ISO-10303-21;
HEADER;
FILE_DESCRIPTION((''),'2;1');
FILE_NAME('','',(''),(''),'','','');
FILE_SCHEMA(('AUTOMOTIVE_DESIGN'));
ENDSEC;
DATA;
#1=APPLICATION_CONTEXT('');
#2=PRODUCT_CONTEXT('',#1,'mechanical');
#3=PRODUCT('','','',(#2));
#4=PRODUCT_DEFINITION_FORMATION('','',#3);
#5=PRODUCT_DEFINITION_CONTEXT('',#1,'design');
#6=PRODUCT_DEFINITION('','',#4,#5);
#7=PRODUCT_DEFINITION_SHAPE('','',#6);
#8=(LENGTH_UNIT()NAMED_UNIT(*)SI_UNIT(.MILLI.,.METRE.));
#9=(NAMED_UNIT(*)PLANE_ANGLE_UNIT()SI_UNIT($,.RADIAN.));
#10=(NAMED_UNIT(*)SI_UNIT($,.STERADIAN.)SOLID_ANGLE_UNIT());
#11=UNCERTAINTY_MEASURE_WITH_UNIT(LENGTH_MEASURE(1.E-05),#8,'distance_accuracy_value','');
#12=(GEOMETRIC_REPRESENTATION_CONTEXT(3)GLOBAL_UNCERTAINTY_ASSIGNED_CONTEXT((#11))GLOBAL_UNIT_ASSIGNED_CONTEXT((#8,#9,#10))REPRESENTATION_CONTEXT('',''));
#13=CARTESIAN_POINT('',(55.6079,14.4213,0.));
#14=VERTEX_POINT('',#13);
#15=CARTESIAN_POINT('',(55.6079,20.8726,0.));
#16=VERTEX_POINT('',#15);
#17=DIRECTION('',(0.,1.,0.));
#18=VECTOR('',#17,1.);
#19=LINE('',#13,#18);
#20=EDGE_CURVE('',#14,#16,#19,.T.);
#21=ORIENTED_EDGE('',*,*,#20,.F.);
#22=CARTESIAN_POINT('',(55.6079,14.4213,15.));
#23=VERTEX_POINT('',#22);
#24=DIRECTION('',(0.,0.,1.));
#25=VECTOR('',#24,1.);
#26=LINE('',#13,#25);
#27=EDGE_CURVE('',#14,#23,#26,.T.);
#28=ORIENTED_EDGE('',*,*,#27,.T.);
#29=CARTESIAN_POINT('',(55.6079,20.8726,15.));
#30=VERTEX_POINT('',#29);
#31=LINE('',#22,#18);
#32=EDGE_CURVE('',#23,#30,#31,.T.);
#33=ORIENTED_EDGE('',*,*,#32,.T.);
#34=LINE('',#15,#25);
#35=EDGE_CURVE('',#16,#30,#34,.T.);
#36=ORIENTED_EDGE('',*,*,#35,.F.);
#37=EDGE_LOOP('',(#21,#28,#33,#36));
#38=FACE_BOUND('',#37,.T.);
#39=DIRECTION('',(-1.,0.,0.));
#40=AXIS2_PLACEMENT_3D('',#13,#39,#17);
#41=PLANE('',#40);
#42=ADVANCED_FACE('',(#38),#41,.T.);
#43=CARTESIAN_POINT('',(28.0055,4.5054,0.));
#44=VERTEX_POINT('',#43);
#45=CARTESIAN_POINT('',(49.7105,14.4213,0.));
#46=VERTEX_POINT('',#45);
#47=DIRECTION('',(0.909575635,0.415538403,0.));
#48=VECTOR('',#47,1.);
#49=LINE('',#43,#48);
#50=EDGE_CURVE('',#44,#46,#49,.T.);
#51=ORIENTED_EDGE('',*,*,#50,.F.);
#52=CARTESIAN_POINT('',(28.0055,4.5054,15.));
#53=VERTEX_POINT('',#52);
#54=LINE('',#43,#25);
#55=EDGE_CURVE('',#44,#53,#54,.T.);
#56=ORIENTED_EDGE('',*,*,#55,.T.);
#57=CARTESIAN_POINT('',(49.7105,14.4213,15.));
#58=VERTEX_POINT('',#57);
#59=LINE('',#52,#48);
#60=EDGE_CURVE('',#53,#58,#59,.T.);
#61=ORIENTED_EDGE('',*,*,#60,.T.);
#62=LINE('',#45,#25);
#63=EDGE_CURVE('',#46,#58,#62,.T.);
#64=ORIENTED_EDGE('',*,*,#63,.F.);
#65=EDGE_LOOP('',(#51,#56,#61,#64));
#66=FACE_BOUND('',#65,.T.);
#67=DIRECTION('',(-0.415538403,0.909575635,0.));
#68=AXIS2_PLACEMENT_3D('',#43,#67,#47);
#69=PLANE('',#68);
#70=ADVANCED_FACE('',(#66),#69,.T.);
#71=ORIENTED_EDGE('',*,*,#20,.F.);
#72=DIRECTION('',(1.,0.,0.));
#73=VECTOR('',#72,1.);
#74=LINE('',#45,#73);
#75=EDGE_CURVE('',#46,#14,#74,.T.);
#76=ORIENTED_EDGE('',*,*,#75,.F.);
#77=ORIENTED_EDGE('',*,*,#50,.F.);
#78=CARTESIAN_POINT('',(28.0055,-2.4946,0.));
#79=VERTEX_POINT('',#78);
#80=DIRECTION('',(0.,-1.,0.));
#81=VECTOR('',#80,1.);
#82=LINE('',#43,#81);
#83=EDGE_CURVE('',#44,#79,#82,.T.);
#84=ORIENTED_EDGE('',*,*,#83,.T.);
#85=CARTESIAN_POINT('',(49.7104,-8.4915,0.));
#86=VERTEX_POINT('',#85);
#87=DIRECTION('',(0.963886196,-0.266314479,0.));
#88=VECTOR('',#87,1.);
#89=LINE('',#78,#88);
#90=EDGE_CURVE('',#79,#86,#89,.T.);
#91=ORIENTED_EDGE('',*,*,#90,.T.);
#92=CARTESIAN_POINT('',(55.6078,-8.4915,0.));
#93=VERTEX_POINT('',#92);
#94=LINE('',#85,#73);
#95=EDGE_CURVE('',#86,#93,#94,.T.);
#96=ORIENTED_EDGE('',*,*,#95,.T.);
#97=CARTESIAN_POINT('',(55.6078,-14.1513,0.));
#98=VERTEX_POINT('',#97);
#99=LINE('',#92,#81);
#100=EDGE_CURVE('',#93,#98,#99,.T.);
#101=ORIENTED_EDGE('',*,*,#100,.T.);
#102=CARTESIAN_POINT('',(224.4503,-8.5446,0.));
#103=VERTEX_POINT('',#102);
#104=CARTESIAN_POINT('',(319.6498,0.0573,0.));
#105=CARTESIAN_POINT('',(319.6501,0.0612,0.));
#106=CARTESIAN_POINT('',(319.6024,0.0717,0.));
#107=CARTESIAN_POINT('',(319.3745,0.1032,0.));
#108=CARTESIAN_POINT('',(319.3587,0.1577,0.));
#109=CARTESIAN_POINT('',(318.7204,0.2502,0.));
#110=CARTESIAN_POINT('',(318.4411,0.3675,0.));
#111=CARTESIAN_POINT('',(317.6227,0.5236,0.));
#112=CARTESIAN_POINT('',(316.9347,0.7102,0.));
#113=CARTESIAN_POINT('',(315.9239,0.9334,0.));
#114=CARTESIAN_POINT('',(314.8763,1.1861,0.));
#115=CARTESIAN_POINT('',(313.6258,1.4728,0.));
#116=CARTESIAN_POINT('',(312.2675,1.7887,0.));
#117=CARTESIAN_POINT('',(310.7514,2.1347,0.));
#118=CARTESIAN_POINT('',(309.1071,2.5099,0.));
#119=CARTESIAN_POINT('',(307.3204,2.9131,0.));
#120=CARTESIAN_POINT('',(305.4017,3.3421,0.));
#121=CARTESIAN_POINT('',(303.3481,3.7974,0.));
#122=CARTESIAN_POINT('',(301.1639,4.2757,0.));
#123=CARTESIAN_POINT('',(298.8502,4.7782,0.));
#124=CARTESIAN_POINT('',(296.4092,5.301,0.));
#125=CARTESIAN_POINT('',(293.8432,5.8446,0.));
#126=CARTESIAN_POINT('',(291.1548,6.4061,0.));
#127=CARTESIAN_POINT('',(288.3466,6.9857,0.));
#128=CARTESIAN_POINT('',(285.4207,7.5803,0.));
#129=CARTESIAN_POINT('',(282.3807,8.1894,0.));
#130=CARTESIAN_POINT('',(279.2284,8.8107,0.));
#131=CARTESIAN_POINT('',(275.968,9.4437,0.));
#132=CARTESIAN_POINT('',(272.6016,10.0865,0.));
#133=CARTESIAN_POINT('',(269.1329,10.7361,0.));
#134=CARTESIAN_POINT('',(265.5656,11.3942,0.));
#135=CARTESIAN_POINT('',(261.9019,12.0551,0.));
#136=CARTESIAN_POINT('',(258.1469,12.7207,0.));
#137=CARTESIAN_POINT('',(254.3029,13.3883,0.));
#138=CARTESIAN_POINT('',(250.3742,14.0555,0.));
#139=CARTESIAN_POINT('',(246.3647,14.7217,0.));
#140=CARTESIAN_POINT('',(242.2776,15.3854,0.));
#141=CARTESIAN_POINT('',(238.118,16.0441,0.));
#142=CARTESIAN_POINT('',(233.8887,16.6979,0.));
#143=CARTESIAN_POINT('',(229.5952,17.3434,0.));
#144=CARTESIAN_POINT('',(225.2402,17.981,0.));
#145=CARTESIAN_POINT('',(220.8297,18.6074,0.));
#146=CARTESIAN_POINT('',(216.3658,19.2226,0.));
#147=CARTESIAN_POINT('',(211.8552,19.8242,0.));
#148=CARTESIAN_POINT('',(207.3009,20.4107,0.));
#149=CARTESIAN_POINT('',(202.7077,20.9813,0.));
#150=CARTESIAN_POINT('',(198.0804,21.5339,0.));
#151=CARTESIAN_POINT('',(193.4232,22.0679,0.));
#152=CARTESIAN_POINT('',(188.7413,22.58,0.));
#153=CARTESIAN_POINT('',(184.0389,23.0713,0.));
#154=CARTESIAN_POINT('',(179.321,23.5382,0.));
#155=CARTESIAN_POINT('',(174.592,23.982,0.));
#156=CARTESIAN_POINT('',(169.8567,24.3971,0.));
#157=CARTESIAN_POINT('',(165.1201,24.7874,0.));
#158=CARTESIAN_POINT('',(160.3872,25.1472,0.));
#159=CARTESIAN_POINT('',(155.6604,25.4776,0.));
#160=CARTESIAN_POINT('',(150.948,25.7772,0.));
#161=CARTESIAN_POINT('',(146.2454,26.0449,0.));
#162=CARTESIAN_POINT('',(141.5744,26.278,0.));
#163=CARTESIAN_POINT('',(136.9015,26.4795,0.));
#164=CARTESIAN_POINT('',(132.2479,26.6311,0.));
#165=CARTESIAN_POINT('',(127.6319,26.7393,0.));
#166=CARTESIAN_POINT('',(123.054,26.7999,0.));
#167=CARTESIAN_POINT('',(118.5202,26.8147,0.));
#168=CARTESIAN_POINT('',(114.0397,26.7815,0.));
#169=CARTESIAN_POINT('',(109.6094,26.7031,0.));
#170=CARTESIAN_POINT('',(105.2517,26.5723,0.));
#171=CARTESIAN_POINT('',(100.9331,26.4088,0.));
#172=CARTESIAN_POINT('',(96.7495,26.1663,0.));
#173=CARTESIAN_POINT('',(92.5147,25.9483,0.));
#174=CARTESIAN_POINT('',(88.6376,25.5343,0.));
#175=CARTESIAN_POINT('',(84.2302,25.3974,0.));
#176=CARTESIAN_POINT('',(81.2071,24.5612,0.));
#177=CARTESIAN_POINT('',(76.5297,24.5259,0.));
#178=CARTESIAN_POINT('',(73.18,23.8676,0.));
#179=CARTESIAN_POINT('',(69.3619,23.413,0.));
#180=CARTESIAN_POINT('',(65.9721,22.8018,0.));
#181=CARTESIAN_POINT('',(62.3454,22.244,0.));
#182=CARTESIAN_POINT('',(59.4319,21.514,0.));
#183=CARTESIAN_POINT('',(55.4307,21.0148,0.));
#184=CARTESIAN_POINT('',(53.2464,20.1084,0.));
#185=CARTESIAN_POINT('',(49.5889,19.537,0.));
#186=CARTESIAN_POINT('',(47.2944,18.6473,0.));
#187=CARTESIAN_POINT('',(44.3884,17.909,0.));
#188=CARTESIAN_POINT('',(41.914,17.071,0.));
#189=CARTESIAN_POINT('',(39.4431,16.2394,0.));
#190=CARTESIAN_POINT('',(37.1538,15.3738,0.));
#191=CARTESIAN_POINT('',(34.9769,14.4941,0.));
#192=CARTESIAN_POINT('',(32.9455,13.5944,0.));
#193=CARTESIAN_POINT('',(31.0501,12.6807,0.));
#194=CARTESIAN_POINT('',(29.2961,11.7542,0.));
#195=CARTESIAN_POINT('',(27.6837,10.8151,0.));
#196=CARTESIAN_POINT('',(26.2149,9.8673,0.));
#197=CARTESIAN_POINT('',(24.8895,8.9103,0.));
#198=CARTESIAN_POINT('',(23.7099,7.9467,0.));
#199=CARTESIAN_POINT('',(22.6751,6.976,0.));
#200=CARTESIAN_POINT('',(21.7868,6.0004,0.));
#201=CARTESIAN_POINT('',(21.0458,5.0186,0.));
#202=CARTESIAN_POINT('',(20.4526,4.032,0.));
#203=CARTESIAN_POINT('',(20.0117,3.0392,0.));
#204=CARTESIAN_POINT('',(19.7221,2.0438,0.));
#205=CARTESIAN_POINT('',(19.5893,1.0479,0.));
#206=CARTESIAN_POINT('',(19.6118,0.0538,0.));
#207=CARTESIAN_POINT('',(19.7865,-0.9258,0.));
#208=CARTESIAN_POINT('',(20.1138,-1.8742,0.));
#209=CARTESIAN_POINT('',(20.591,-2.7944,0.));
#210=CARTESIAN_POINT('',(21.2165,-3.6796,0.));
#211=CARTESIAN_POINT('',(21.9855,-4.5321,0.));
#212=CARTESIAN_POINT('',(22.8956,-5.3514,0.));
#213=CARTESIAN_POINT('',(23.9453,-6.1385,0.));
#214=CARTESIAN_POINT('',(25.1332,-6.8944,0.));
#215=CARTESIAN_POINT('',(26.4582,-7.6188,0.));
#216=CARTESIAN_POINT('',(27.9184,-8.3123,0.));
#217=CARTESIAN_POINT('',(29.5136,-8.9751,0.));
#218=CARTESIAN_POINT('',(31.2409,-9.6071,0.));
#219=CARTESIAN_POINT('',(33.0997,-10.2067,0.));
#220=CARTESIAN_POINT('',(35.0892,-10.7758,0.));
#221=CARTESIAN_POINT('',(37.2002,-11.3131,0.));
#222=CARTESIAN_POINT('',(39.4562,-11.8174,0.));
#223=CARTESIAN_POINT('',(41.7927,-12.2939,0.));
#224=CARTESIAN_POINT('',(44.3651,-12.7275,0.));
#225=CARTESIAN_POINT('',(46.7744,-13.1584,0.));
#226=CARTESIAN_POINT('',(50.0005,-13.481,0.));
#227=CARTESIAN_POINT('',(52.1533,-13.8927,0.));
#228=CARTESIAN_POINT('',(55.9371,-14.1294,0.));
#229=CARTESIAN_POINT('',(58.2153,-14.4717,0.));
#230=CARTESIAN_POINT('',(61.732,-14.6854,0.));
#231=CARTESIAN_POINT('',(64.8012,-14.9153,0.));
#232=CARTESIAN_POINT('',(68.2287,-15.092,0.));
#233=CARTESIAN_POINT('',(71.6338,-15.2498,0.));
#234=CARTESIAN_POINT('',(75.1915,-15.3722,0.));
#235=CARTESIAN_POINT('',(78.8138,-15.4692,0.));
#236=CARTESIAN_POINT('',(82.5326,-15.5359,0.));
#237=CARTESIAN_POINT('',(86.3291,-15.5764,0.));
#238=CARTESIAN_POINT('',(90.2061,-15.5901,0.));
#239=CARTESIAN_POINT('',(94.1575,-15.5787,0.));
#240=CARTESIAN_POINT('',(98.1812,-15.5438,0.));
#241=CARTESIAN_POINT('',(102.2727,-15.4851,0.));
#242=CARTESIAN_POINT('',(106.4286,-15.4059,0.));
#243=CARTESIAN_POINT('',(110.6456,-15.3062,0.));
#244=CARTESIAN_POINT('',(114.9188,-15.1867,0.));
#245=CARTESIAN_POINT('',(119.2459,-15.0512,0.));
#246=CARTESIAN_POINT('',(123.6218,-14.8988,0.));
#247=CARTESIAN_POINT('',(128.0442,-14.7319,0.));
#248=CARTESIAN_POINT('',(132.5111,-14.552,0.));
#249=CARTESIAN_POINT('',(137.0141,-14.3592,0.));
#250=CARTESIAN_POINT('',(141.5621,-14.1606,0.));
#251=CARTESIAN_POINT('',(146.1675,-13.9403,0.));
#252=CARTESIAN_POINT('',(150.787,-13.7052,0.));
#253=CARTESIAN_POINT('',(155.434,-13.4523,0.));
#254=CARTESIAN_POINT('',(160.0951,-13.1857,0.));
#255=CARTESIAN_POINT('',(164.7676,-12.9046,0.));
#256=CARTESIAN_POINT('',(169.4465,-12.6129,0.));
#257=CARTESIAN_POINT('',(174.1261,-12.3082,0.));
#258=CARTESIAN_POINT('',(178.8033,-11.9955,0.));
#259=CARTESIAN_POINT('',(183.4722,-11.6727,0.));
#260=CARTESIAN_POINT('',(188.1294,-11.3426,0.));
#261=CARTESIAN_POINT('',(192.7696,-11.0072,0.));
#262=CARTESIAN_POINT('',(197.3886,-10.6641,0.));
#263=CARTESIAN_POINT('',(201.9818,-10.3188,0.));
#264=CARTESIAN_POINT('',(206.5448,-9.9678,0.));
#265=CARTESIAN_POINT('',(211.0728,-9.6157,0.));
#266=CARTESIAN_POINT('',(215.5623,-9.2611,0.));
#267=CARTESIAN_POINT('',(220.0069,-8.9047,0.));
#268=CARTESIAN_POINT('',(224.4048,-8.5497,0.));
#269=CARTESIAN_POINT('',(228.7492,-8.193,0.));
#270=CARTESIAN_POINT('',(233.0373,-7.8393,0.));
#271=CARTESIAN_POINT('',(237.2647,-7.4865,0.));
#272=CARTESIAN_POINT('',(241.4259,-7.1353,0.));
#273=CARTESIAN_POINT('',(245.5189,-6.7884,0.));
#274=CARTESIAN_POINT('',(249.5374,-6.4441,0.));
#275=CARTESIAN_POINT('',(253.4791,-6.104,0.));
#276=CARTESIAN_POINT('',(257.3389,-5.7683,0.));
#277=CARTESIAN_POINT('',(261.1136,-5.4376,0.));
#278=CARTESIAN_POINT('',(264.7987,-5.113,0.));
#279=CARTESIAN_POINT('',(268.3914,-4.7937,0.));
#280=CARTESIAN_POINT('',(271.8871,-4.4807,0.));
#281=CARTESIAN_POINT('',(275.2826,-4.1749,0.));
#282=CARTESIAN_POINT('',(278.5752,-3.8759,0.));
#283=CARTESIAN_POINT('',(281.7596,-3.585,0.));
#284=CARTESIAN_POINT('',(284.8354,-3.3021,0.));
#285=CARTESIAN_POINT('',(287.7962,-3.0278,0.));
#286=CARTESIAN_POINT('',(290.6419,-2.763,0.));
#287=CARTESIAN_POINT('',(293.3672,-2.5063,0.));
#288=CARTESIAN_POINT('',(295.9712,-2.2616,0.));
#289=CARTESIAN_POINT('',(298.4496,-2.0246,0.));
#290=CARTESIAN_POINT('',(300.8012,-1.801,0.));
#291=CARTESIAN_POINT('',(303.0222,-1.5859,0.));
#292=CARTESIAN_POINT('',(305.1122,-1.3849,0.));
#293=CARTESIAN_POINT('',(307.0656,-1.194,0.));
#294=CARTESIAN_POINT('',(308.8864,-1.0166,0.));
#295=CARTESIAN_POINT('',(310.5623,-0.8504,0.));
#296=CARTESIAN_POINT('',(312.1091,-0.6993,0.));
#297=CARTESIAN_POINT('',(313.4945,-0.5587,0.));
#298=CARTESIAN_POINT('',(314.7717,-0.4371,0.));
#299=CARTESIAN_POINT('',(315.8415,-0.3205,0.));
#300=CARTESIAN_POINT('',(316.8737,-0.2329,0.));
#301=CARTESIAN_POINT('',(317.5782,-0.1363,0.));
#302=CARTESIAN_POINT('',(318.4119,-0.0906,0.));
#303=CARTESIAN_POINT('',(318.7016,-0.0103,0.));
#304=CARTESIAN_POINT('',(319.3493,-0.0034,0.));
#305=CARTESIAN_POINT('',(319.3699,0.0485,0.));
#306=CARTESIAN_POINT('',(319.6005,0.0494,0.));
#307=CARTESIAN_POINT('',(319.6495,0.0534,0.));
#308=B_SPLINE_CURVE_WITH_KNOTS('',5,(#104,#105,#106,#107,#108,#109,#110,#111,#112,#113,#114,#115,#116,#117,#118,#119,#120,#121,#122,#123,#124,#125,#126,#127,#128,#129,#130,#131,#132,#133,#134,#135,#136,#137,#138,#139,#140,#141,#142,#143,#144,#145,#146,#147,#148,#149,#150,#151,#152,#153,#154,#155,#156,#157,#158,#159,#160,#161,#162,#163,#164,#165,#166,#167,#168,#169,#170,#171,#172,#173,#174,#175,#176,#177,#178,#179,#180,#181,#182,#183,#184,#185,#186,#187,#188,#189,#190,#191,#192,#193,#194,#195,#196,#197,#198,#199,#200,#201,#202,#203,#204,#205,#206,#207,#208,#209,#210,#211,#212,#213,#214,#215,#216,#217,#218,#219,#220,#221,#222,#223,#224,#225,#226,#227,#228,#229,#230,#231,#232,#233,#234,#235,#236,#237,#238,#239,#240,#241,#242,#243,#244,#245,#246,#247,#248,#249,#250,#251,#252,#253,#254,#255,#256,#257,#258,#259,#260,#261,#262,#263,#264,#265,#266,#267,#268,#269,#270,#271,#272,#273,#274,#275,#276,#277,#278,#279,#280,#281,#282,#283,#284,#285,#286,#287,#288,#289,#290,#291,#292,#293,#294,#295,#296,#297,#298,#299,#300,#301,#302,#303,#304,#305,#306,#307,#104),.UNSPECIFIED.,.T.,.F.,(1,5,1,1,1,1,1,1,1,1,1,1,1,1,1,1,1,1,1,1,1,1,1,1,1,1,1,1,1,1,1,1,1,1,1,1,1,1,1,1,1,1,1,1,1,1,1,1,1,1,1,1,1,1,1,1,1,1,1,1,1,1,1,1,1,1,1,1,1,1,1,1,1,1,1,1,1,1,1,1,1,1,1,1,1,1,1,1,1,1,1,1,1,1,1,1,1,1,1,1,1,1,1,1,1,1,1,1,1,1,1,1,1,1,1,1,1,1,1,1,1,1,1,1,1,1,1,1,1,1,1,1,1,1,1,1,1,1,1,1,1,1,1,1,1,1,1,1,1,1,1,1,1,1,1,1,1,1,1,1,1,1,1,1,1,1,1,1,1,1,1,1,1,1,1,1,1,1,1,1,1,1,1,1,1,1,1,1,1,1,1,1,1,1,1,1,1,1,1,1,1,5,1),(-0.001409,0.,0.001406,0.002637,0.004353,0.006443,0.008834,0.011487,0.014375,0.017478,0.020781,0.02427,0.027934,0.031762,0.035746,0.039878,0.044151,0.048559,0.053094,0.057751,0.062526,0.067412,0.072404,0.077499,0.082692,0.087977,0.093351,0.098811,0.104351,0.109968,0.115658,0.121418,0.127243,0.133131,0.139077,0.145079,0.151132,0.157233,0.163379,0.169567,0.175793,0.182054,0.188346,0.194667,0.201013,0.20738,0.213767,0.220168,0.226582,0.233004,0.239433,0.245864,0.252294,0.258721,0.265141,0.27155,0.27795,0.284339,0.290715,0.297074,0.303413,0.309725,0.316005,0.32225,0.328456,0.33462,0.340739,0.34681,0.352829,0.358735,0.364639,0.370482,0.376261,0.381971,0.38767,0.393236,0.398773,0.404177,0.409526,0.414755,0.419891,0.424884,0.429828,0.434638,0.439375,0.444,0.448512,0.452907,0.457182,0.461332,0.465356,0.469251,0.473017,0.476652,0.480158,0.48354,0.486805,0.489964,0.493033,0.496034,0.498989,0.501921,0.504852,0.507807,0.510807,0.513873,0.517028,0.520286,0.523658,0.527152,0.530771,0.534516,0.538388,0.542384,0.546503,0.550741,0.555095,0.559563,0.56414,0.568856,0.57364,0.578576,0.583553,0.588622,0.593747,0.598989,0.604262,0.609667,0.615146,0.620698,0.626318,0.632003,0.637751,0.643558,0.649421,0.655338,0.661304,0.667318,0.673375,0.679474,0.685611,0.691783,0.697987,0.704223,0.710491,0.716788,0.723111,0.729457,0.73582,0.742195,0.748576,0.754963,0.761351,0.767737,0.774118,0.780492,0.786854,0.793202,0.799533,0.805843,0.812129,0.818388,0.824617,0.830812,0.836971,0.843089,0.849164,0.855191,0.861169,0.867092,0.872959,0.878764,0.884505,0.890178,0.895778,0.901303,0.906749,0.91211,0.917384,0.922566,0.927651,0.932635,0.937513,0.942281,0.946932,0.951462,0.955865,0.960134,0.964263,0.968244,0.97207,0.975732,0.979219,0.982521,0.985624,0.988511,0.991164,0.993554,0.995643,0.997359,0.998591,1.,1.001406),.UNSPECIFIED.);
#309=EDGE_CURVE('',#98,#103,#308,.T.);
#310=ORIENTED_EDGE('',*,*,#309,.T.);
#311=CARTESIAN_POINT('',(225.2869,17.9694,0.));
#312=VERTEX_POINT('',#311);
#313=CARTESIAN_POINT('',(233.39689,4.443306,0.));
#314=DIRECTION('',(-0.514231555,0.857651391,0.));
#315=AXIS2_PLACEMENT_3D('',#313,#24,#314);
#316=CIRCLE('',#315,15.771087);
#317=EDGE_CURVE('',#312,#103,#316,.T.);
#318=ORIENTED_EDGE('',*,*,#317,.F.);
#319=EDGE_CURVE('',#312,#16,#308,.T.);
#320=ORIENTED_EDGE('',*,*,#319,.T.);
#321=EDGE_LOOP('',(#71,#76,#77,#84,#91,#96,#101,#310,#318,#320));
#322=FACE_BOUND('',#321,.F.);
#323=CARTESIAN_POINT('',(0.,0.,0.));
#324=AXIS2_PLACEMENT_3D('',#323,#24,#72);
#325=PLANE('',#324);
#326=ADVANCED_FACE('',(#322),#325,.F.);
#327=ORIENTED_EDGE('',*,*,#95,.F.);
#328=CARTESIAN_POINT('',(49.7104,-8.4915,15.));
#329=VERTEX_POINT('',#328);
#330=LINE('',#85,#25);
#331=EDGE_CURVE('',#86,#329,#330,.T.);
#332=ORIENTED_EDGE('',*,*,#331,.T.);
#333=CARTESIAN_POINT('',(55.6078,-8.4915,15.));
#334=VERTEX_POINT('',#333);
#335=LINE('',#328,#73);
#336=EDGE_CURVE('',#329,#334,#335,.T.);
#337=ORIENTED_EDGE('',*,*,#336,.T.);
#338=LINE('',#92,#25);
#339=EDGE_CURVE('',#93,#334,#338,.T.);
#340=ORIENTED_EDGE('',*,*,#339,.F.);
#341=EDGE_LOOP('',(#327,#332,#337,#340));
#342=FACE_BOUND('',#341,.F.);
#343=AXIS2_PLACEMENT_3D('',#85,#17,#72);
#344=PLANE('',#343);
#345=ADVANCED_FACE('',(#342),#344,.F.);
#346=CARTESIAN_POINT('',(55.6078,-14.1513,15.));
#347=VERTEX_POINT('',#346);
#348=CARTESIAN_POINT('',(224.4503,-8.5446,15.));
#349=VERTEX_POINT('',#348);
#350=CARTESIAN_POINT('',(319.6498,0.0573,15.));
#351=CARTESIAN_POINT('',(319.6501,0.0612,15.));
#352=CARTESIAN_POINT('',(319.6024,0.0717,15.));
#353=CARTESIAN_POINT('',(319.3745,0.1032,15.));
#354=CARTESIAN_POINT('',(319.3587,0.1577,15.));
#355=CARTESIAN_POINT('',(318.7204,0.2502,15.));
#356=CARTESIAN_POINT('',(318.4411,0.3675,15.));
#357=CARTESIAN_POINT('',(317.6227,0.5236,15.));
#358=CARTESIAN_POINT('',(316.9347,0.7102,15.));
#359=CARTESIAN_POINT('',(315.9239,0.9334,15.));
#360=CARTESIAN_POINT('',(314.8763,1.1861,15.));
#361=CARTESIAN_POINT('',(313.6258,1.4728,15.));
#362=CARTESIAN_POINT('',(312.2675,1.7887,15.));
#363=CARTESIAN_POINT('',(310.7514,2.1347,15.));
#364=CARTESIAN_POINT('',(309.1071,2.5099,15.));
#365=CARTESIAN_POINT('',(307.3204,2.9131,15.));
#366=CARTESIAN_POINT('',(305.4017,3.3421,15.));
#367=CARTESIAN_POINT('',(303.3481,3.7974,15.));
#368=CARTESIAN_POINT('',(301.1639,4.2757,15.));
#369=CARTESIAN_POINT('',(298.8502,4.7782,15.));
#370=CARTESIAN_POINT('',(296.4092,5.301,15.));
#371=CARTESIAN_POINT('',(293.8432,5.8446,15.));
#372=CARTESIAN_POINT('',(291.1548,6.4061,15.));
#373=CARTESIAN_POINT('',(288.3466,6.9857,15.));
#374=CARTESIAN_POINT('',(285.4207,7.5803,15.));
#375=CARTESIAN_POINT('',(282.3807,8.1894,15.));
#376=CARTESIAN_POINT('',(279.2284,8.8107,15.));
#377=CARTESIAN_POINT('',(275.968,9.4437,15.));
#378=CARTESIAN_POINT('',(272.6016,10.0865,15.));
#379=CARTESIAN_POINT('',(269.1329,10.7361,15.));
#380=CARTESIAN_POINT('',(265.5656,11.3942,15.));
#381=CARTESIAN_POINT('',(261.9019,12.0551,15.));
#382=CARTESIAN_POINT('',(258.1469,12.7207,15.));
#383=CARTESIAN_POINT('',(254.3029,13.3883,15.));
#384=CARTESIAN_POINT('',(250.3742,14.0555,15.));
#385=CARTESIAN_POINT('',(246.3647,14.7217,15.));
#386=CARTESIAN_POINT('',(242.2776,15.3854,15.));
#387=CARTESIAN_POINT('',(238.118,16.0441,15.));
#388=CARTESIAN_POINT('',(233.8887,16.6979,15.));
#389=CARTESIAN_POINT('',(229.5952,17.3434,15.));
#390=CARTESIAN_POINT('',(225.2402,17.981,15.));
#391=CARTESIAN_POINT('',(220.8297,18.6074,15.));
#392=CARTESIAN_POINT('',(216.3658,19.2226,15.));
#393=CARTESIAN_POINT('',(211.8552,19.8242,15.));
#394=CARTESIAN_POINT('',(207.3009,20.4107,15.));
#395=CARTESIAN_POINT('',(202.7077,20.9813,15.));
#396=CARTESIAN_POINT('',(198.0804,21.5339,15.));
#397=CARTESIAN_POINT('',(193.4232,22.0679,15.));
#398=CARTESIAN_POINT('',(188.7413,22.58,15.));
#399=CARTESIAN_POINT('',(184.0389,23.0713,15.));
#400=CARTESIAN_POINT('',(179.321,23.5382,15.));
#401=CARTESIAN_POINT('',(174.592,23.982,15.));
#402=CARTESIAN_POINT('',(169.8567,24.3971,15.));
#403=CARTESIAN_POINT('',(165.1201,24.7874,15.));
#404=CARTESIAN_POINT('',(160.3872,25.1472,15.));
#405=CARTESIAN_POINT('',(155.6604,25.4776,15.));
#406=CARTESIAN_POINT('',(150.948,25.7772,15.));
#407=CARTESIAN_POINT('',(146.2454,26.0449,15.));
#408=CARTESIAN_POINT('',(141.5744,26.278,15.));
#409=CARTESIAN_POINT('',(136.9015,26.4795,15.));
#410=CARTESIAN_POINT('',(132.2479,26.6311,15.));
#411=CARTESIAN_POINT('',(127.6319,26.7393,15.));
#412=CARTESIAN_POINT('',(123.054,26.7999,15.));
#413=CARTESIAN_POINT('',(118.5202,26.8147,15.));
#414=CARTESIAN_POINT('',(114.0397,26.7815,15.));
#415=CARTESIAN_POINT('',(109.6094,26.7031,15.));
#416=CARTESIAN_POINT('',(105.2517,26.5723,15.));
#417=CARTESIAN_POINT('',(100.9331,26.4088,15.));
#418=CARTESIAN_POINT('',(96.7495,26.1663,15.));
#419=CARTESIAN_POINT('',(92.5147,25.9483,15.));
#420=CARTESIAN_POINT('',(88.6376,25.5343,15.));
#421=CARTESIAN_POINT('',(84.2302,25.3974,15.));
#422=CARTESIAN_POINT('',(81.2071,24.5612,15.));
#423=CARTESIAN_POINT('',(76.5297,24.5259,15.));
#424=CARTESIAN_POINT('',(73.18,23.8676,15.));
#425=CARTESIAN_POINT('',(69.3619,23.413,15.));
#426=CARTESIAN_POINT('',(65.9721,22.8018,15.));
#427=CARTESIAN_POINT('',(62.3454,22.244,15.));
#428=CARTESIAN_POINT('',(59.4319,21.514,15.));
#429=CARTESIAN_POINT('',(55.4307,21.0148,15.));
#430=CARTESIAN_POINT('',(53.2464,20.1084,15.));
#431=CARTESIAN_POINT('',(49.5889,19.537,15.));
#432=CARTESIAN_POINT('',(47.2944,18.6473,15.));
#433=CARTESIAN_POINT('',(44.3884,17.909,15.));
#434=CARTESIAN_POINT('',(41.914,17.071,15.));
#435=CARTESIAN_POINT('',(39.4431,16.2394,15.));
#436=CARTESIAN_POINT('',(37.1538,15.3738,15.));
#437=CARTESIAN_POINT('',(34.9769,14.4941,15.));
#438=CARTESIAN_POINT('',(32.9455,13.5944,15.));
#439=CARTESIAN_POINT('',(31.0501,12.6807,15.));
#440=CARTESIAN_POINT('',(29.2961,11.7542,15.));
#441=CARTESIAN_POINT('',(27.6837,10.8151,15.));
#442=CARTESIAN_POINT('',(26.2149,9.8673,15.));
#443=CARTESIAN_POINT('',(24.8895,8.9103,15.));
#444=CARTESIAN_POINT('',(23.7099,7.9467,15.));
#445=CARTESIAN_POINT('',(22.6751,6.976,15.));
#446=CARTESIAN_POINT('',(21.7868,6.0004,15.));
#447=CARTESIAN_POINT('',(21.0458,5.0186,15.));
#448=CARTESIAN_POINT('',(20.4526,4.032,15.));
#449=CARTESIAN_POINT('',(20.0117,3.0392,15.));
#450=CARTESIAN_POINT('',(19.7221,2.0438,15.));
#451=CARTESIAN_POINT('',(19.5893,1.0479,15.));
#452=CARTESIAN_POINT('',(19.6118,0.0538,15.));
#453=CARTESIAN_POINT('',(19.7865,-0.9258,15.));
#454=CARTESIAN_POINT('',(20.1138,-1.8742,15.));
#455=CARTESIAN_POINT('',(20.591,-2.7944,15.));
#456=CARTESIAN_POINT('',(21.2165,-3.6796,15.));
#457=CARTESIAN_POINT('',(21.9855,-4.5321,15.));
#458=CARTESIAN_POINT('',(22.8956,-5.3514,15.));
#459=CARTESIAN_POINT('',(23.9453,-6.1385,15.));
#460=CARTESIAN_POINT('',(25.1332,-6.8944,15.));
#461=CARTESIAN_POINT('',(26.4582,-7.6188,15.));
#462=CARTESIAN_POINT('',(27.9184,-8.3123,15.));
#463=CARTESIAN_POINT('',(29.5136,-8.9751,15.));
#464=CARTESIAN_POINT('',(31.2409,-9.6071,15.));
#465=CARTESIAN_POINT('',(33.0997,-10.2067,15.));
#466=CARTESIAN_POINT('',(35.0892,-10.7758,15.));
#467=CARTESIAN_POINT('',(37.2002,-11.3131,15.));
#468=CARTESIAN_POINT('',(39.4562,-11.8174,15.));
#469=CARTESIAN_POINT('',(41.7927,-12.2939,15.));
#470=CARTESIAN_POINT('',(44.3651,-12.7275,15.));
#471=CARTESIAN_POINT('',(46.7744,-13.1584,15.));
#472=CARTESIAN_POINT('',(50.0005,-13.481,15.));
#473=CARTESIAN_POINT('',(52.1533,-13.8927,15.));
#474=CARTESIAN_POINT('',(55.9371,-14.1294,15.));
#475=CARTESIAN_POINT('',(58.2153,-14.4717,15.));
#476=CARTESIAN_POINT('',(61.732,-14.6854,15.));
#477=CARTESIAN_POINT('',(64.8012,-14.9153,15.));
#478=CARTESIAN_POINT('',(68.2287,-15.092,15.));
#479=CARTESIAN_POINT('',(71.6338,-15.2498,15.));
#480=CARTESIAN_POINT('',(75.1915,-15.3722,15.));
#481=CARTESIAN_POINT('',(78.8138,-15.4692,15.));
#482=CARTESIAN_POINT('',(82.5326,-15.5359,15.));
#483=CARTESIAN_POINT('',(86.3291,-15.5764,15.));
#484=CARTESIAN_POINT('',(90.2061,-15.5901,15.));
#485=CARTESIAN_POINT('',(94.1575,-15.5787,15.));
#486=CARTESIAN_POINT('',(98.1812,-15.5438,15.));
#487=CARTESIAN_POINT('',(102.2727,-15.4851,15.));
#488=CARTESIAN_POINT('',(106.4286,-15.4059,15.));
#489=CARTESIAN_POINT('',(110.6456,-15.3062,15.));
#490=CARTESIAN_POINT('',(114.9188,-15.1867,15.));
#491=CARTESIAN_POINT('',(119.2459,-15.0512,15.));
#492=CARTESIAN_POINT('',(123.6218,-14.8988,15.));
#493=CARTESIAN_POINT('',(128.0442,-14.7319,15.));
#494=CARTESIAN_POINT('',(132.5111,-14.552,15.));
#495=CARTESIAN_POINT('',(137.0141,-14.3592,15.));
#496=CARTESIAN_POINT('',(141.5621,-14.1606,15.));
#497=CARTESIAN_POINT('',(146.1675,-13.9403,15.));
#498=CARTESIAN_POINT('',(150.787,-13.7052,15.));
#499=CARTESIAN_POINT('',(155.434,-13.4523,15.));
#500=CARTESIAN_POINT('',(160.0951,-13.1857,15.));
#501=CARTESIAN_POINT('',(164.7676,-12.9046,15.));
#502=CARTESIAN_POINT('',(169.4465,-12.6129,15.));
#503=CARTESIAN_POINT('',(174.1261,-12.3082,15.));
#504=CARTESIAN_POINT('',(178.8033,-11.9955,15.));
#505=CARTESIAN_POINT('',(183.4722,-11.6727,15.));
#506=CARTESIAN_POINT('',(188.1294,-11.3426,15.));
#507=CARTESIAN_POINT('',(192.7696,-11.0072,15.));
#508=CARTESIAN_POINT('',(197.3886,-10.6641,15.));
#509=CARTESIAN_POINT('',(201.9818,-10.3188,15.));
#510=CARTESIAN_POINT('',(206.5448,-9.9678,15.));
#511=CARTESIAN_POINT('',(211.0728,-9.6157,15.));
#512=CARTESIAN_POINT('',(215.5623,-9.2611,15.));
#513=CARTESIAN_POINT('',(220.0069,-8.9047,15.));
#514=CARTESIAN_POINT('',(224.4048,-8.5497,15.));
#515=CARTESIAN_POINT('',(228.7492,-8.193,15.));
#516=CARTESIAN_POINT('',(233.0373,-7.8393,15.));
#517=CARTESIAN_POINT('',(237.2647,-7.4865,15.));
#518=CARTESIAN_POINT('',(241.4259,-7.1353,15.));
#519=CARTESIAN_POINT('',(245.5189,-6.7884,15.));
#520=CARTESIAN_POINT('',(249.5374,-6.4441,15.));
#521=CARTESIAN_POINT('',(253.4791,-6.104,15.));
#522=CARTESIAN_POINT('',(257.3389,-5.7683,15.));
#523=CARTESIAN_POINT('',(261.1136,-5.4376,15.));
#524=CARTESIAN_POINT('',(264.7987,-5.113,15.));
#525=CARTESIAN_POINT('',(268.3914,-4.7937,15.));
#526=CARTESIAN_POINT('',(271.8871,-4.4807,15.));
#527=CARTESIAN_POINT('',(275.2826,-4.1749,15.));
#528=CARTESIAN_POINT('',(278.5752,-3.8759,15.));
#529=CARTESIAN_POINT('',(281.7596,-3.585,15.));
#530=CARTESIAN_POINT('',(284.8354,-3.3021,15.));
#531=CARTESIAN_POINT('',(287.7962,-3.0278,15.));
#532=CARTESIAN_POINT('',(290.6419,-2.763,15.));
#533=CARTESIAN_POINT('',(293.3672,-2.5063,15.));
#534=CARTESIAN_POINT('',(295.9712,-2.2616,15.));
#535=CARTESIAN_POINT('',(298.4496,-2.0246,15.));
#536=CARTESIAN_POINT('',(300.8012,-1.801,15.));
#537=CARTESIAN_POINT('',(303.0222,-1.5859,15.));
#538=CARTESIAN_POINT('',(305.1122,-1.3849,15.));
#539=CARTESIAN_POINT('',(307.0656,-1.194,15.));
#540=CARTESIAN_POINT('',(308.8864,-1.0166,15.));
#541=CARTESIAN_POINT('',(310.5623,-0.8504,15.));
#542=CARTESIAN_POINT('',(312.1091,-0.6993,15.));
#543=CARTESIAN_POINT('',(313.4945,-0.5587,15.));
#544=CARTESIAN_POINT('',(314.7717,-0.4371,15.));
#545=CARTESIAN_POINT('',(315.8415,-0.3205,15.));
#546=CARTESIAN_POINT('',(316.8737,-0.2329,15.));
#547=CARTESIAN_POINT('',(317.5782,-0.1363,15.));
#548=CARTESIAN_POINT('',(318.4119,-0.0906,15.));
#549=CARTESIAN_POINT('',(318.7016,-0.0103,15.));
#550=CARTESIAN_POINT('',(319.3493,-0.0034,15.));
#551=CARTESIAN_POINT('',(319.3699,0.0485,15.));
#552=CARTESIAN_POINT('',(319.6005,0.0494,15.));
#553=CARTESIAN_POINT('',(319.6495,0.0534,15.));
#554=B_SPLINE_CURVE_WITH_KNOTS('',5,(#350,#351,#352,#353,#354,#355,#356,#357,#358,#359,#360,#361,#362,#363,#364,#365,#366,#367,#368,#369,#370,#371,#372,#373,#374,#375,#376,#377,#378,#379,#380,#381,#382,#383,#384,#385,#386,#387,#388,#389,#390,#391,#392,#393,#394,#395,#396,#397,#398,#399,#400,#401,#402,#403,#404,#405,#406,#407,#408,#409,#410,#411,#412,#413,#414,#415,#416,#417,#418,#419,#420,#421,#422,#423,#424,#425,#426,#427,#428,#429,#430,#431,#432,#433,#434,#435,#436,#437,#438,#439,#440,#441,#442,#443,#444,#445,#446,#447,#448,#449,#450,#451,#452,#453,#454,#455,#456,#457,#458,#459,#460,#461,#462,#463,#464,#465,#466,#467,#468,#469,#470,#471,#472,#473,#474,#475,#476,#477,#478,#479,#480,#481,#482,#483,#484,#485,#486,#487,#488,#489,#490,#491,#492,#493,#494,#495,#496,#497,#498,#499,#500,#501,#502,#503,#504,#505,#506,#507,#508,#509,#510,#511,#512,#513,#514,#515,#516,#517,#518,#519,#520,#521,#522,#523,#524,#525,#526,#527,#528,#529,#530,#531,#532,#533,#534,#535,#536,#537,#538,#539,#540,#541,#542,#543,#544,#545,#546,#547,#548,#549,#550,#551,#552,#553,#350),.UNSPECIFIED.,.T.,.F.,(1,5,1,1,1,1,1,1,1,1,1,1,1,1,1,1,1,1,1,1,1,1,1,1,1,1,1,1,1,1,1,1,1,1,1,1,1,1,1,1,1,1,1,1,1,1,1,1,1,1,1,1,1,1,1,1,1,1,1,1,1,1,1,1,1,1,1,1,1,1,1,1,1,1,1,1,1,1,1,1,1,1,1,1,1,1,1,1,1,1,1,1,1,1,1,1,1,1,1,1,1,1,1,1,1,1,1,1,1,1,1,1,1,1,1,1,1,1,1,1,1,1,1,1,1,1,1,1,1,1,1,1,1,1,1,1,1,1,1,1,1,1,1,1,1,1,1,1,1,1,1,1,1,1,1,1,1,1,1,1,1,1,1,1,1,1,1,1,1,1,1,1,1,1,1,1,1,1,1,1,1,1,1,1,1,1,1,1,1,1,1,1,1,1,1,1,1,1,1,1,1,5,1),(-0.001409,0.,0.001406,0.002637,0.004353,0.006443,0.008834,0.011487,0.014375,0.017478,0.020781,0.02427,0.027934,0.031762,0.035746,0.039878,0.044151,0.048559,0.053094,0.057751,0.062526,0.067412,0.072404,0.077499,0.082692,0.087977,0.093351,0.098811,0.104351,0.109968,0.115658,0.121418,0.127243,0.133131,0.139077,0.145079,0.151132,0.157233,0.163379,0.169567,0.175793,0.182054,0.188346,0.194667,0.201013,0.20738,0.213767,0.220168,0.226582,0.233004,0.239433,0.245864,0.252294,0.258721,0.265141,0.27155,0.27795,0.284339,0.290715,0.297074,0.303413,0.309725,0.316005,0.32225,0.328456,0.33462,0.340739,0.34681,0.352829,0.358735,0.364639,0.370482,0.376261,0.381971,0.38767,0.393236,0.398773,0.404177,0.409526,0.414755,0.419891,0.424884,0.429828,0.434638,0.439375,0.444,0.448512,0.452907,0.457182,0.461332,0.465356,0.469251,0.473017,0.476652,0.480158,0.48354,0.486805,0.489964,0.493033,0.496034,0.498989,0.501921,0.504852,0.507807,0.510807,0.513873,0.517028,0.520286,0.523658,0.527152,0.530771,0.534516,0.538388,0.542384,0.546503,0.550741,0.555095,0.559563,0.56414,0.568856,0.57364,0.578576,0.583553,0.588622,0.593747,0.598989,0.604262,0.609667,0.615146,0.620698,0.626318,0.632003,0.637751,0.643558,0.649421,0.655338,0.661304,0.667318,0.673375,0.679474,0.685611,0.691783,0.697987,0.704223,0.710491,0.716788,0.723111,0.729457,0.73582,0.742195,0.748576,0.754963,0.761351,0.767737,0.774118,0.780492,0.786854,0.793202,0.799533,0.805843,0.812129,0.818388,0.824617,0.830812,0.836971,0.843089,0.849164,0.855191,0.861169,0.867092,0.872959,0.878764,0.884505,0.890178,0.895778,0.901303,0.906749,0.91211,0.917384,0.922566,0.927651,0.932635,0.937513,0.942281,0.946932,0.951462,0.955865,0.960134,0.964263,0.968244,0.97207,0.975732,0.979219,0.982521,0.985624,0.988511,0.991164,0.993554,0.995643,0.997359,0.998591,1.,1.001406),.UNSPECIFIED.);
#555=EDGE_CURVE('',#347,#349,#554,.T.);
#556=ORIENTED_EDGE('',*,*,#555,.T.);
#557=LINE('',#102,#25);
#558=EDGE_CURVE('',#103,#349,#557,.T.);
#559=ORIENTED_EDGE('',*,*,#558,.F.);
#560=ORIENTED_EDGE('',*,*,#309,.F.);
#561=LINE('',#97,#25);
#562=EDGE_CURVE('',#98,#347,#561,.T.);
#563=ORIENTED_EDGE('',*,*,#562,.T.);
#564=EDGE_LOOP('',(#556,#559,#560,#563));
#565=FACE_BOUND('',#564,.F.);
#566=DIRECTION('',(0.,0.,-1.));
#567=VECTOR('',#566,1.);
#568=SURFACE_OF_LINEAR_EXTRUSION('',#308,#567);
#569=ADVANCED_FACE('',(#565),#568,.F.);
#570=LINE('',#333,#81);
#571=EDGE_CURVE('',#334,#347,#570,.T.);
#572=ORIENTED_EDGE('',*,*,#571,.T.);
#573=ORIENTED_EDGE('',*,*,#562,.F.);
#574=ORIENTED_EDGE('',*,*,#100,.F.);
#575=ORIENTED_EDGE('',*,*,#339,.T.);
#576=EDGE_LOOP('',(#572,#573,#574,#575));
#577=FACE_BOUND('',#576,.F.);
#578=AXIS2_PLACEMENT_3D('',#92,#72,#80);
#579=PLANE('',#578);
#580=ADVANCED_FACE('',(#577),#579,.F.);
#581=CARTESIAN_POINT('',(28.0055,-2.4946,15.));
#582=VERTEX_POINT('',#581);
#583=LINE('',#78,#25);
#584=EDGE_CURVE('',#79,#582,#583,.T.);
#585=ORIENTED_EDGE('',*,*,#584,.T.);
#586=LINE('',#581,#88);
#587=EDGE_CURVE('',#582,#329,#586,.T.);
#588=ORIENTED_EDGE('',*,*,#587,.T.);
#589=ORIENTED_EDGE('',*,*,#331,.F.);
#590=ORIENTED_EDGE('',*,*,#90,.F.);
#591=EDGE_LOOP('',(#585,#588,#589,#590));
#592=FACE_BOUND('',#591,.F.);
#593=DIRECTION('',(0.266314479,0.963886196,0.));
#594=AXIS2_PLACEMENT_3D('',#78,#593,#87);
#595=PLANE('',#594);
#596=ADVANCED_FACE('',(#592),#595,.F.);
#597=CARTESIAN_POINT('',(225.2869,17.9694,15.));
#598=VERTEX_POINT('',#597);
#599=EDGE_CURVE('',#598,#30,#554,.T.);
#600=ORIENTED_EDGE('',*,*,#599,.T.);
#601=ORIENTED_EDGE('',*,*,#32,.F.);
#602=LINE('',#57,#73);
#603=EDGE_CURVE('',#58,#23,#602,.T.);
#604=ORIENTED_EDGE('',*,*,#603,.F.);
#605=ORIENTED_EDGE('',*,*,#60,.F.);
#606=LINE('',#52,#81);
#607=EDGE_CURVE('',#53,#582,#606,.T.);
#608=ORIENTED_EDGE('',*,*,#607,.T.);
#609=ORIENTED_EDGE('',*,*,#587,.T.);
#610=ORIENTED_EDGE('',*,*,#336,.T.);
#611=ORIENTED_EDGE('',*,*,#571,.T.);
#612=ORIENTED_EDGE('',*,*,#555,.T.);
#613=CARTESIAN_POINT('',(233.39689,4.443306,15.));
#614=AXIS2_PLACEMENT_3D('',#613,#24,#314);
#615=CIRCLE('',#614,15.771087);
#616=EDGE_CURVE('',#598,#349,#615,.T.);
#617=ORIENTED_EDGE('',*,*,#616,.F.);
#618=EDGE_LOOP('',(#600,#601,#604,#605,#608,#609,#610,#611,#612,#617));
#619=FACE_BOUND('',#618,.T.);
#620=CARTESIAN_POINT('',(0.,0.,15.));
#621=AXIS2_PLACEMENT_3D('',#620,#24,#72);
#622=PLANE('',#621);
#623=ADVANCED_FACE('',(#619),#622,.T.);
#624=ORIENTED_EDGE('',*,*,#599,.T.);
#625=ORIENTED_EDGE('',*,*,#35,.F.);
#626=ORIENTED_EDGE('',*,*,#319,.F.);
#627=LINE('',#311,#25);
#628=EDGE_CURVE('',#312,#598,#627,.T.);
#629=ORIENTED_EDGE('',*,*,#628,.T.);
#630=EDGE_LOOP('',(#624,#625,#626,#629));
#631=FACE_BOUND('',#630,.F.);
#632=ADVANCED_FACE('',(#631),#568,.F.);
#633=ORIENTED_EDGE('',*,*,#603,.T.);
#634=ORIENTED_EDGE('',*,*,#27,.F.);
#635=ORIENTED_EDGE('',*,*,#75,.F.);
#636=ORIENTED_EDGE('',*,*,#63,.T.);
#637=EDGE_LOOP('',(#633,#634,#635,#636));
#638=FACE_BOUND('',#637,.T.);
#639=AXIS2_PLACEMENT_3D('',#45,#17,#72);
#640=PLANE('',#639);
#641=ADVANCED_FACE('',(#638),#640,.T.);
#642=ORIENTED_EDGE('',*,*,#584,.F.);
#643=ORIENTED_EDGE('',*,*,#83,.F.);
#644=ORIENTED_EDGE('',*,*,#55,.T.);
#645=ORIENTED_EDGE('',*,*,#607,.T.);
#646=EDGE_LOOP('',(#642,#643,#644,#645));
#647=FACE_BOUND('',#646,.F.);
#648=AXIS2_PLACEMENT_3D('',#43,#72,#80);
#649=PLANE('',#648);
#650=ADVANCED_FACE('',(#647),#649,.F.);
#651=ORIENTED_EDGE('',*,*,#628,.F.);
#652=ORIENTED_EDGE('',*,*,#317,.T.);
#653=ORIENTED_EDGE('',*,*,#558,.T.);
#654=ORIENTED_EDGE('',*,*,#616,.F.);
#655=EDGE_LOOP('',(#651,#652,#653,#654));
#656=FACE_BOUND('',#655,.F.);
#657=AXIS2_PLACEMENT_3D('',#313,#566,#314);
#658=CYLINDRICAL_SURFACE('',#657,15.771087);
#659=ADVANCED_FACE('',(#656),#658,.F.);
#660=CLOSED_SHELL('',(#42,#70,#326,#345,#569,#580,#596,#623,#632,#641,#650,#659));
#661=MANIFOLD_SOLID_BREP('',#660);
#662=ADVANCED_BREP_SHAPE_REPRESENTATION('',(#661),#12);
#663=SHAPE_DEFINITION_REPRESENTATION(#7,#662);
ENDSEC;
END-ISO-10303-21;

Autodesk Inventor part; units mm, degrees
ref_plane "YZ Plane" through (0, 0, 0) normal (1, 0, 0) x (0, 1, 0)
ref_plane "XZ Plane" through (0, 0, 0) normal (0, 1, 0) x (-1, 0, 0)
ref_plane "XY Plane" through (0, 0, 0) normal (0, 0, 1) x (1, 0, 0)
sketch "Sketch2" plane through (0, 0, 0) normal (0, 0, 1) x (1, 0, 0)
  spline S0 degree 5 poles (319.6498, 0.0573) (319.6501, 0.0612) (319.6024, 0.0717) (319.3745, 0.1032) (319.3587, 0.1577) (318.7204, 0.2502) (318.4411, 0.3675) (317.6227, 0.5236) (316.9347, 0.7102) (315.9239, 0.9334) (314.8763, 1.1861) (313.6258, 1.4728) (312.2675, 1.7887) (310.7514, 2.1347) (309.1071, 2.5099) (307.3204, 2.9131) (305.4017, 3.3421) (303.3481, 3.7974) (301.1639, 4.2757) (298.8502, 4.7782) (296.4092, 5.301) (293.8432, 5.8446) (291.1548, 6.4061) (288.3466, 6.9857) (285.4207, 7.5803) (282.3807, 8.1894) (279.2284, 8.8107) (275.968, 9.4437) (272.6016, 10.0865) (269.1329, 10.7361) (265.5656, 11.3942) (261.9019, 12.0551) (258.1469, 12.7207) (254.3029, 13.3883) (250.3742, 14.0555) (246.3647, 14.7217) (242.2776, 15.3854) (238.118, 16.0441) (233.8887, 16.6979) (229.5952, 17.3434) (225.2402, 17.981) (220.8297, 18.6074) (216.3658, 19.2226) (211.8552, 19.8242) (207.3009, 20.4107) (202.7077, 20.9813) (198.0804, 21.5339) (193.4232, 22.0679) (188.7413, 22.58) (184.0389, 23.0713) (179.321, 23.5382) (174.592, 23.982) (169.8567, 24.3971) (165.1201, 24.7874) (160.3872, 25.1472) (155.6604, 25.4776) (150.948, 25.7772) (146.2454, 26.0449) (141.5744, 26.278) (136.9015, 26.4795) (132.2479, 26.6311) (127.6319, 26.7393) (123.054, 26.7999) (118.5202, 26.8147) (114.0397, 26.7815) (109.6094, 26.7031) (105.2517, 26.5723) (100.9331, 26.4088) (96.7495, 26.1663) (92.5147, 25.9483) (88.6376, 25.5343) (84.2302, 25.3974) (81.2071, 24.5612) (76.5297, 24.5259) (73.18, 23.8676) (69.3619, 23.413) (65.9721, 22.8018) (62.3454, 22.244) (59.4319, 21.514) (55.4307, 21.0148) (53.2464, 20.1084) (49.5889, 19.537) (47.2944, 18.6473) (44.3884, 17.909) (41.914, 17.071) (39.4431, 16.2394) (37.1538, 15.3738) (34.9769, 14.4941) (32.9455, 13.5944) (31.0501, 12.6807) (29.2961, 11.7542) (27.6837, 10.8151) (26.2149, 9.8673) (24.8895, 8.9103) (23.7099, 7.9467) (22.6751, 6.976) (21.7868, 6.0004) (21.0458, 5.0186) (20.4526, 4.032) (20.0117, 3.0392) (19.7221, 2.0438) (19.5893, 1.0479) (19.6118, 0.0538) (19.7865, -0.9258) (20.1138, -1.8742) (20.591, -2.7944) (21.2165, -3.6796) (21.9855, -4.5321) (22.8956, -5.3514) (23.9453, -6.1385) (25.1332, -6.8944) (26.4582, -7.6188) (27.9184, -8.3123) (29.5136, -8.9751) (31.2409, -9.6071) (33.0997, -10.2067) (35.0892, -10.7758) (37.2002, -11.3131) (39.4562, -11.8174) (41.7927, -12.2939) (44.3651, -12.7275) (46.7744, -13.1584) (50.0005, -13.481) (52.1533, -13.8927) (55.9371, -14.1294) (58.2153, -14.4717) (61.732, -14.6854) (64.8012, -14.9153) (68.2287, -15.092) (71.6338, -15.2498) (75.1915, -15.3722) (78.8138, -15.4692) (82.5326, -15.5359) (86.3291, -15.5764) (90.2061, -15.5901) (94.1575, -15.5787) (98.1812, -15.5438) (102.2727, -15.4851) (106.4286, -15.4059) (110.6456, -15.3062) (114.9188, -15.1867) (119.2459, -15.0512) (123.6218, -14.8988) (128.0442, -14.7319) (132.5111, -14.552) (137.0141, -14.3592) (141.5621, -14.1606) (146.1675, -13.9403) (150.787, -13.7052) (155.434, -13.4523) (160.0951, -13.1857) (164.7676, -12.9046) (169.4465, -12.6129) (174.1261, -12.3082) (178.8033, -11.9955) (183.4722, -11.6727) (188.1294, -11.3426) (192.7696, -11.0072) (197.3886, -10.6641) (201.9818, -10.3188) (206.5448, -9.9678) (211.0728, -9.6157) (215.5623, -9.2611) (220.0069, -8.9047) (224.4048, -8.5497) (228.7492, -8.193) (233.0373, -7.8393) (237.2647, -7.4865) (241.4259, -7.1353) (245.5189, -6.7884) (249.5374, -6.4441) (253.4791, -6.104) (257.3389, -5.7683) (261.1136, -5.4376) (264.7987, -5.113) (268.3914, -4.7937) (271.8871, -4.4807) (275.2826, -4.1749) (278.5752, -3.8759) (281.7596, -3.585) (284.8354, -3.3021) (287.7962, -3.0278) (290.6419, -2.763) (293.3672, -2.5063) (295.9712, -2.2616) (298.4496, -2.0246) (300.8012, -1.801) (303.0222, -1.5859) (305.1122, -1.3849) (307.0656, -1.194) (308.8864, -1.0166) (310.5623, -0.8504) (312.1091, -0.6993) (313.4945, -0.5587) (314.7717, -0.4371) (315.8415, -0.3205) (316.8737, -0.2329) (317.5782, -0.1363) (318.4119, -0.0906) (318.7016, -0.0103) (319.3493, -0.0034) (319.3699, 0.0485) (319.6005, 0.0494) (319.6495, 0.0534) (319.6498, 0.0573) knots 0 0 0 0 0 0 0.001406 0.002637 0.004353 0.006443 0.008834 0.011487 0.014375 0.017478 0.020781 0.02427 0.027934 0.031762 0.035746 0.039878 0.044151 0.048559 0.053094 0.057751 0.062526 0.067412 0.072404 0.077499 0.082692 0.087977 0.093351 0.098811 0.104351 0.109968 0.115658 0.121418 0.127243 0.133131 0.139077 0.145079 0.151132 0.157233 0.163379 0.169567 0.175793 0.182054 0.188346 0.194667 0.201013 0.20738 0.213767 0.220168 0.226582 0.233004 0.239433 0.245864 0.252294 0.258721 0.265141 0.27155 0.27795 0.284339 0.290715 0.297074 0.303413 0.309725 0.316005 0.32225 0.328456 0.33462 0.340739 0.34681 0.352829 0.358735 0.364639 0.370482 0.376261 0.381971 0.38767 0.393236 0.398773 0.404177 0.409526 0.414755 0.419891 0.424884 0.429828 0.434638 0.439375 0.444 0.448512 0.452907 0.457182 0.461332 0.465356 0.469251 0.473017 0.476652 0.480158 0.48354 0.486805 0.489964 0.493033 0.496034 0.498989 0.501921 0.504852 0.507807 0.510807 0.513873 0.517028 0.520286 0.523658 0.527152 0.530771 0.534516 0.538388 0.542384 0.546503 0.550741 0.555095 0.559563 0.56414 0.568856 0.57364 0.578576 0.583553 0.588622 0.593747 0.598989 0.604262 0.609667 0.615146 0.620698 0.626318 0.632003 0.637751 0.643558 0.649421 0.655338 0.661304 0.667318 0.673375 0.679474 0.685611 0.691783 0.697987 0.704223 0.710491 0.716788 0.723111 0.729457 0.73582 0.742195 0.748576 0.754963 0.761351 0.767737 0.774118 0.780492 0.786854 0.793202 0.799533 0.805843 0.812129 0.818388 0.824617 0.830812 0.836971 0.843089 0.849164 0.855191 0.861169 0.867092 0.872959 0.878764 0.884505 0.890178 0.895778 0.901303 0.906749 0.91211 0.917384 0.922566 0.927651 0.932635 0.937513 0.942281 0.946932 0.951462 0.955865 0.960134 0.964263 0.968244 0.97207 0.975732 0.979219 0.982521 0.985624 0.988511 0.991164 0.993554 0.995643 0.997359 0.998591 1 1 1 1 1 1
  line L0 (79.5135, 4.6359) -> (79.5135, 24.6083) construction
  line L1 (79.5135, 4.6359) -> (209.6498, 4.6359) construction
  line L2 (319.6498, 0.0573) -> (219.6498, 0.0573) construction
  line L3 (219.6499, 18.7671) -> (219.6499, -8.9327) construction
  line L4 (28.0055, 4.5054) -> (28.0055, -2.4946)
  line L5 (19.627, 1.0326) -> (319.6498, 0.0573) construction
  line L6 (49.7105, 14.4213) -> (55.6079, 14.4213)
  line L7 (49.7104, -8.4915) -> (55.6078, -8.4915)
  line L8 (28.0055, 4.5054) -> (49.7105, 14.4213)
  line L9 (28.0055, -2.4946) -> (49.7104, -8.4915)
  line L10 (55.6079, 14.4213) -> (55.6079, 20.8726)
  line L11 (55.6078, -8.4915) -> (55.6078, -14.1513)
  arc A0 (225.2869, 17.9694) -> (224.4503, -8.5446) centre (233.3969, 4.4433) ccw
  point P0 (0, 0)
  point P1 (319.3573, 0.1272)
  point P2 (318.9918, 0.2142)
  point P3 (318.4802, 0.3354)
  point P4 (317.8238, 0.4911)
  point P5 (317.0222, 0.6801)
  point P6 (316.0769, 0.9024)
  point P7 (314.9885, 1.1568)
  point P8 (313.7582, 1.443)
  point P9 (312.3866, 1.7598)
  point P10 (310.8752, 2.1063)
  point P11 (309.2258, 2.4819)
  point P12 (307.4393, 2.8854)
  point P13 (305.5178, 3.3153)
  point P14 (303.4628, 3.7707)
  point P15 (301.2764, 4.2501)
  point P16 (298.9607, 4.7526)
  point P17 (296.5175, 5.2764)
  point P18 (293.9492, 5.8203)
  point P19 (291.2585, 6.3828)
  point P20 (288.4478, 6.9627)
  point P21 (285.5195, 7.5582)
  point P22 (282.4766, 8.1678)
  point P23 (279.3218, 8.79)
  point P24 (276.0584, 9.4236)
  point P25 (272.6891, 10.0668)
  point P26 (269.2175, 10.7178)
  point P27 (265.6469, 11.3757)
  point P28 (261.9803, 12.0381)
  point P29 (258.2219, 12.7041)
  point P30 (254.3747, 13.3722)
  point P31 (250.4426, 14.0403)
  point P32 (246.4295, 14.7072)
  point P33 (242.339, 15.3714)
  point P34 (238.1756, 16.0311)
  point P35 (233.9428, 16.6851)
  point P36 (229.6454, 17.3316)
  point P37 (220.8723, 18.5967)
  point P38 (216.4049, 19.2123)
  point P39 (211.8901, 19.8144)
  point P40 (207.332, 20.4015)
  point P41 (202.7347, 20.9724)
  point P42 (198.1034, 21.5256)
  point P43 (193.4423, 22.0596)
  point P44 (188.7563, 22.5726)
  point P45 (184.0499, 23.0637)
  point P46 (179.3279, 23.5314)
  point P47 (174.5948, 23.9745)
  point P48 (169.8554, 24.3909)
  point P49 (165.1148, 24.7803)
  point P50 (160.3775, 25.1406)
  point P51 (155.6479, 25.4709)
  point P52 (150.9316, 25.7703)
  point P53 (146.233, 26.0373)
  point P54 (141.557, 26.2707)
  point P55 (136.882, 26.4681)
  point P56 (132.2209, 26.6211)
  point P57 (127.5964, 26.7282)
  point P58 (123.0133, 26.7888)
  point P59 (118.4761, 26.8026)
  point P60 (113.9902, 26.7693)
  point P61 (109.5601, 26.6886)
  point P62 (105.191, 26.5611)
  point P63 (100.8866, 26.3866)
  point P64 (96.6524, 26.1647)
  point P65 (92.4927, 25.8975)
  point P66 (88.4121, 25.5832)
  point P67 (84.4152, 25.2282)
  point P68 (80.9052, 24.7441)
  point P69 (76.6873, 24.3761)
  point P70 (72.9635, 23.8905)
  point P71 (69.3402, 23.3611)
  point P72 (65.8208, 22.7938)
  point P73 (62.4086, 22.1883)
  point P74 (59.107, 21.5464)
  point P75 (52.8493, 20.1606)
  point P76 (49.7105, 19.4213)
  point P77 (47.0737, 18.6507)
  point P78 (44.3741, 17.8542)
  point P79 (41.8034, 17.0322)
  point P80 (39.3638, 16.1874)
  point P81 (37.0583, 15.3213)
  point P82 (34.8884, 14.4363)
  point P83 (32.8568, 13.534)
  point P84 (30.965, 12.6166)
  point P85 (29.2145, 11.686)
  point P86 (27.6071, 10.7437)
  point P87 (26.1443, 9.7921)
  point P88 (24.8269, 8.8324)
  point P89 (23.6566, 7.8664)
  point P90 (22.6336, 6.8953)
  point P91 (21.7591, 5.9209)
  point P92 (21.0334, 4.9441)
  point P93 (20.4571, 3.9661)
  point P94 (20.0308, 2.9875)
  point P95 (19.7539, 2.0098)
  point P96 (19.6496, 0.0573)
  point P97 (19.8205, -0.9033)
  point P98 (20.1376, -1.8357)
  point P99 (20.6002, -2.7402)
  point P100 (21.208, -3.6159)
  point P101 (21.9598, -4.4628)
  point P102 (22.8544, -5.2806)
  point P103 (23.8909, -6.069)
  point P104 (25.0681, -6.8277)
  point P105 (26.3846, -7.5561)
  point P106 (27.8384, -8.2539)
  point P107 (29.4284, -8.9211)
  point P108 (31.1522, -9.5571)
  point P109 (33.0086, -10.1613)
  point P110 (34.9949, -10.734)
  point P111 (37.1093, -11.2746)
  point P112 (39.3497, -11.7828)
  point P113 (41.7134, -12.2586)
  point P114 (44.198, -12.702)
  point P115 (46.8014, -13.1127)
  point P116 (49.7104, -13.4915)
  point P117 (52.3532, -13.8357)
  point P118 (58.3469, -14.4294)
  point P119 (61.5023, -14.6781)
  point P120 (64.7591, -14.8953)
  point P121 (68.1149, -15.0813)
  point P122 (71.5661, -15.237)
  point P123 (75.1094, -15.3627)
  point P124 (78.7418, -15.4596)
  point P125 (82.46, -15.528)
  point P126 (86.2607, -15.5691)
  point P127 (90.14, -15.5838)
  point P128 (94.0946, -15.5733)
  point P129 (98.1212, -15.5388)
  point P130 (102.2159, -15.4812)
  point P131 (106.3751, -15.4023)
  point P132 (110.5952, -15.303)
  point P133 (114.872, -15.1845)
  point P134 (119.2022, -15.0489)
  point P135 (123.5813, -14.8971)
  point P136 (128.006, -14.7306)
  point P137 (132.4718, -14.5509)
  point P138 (136.9748, -14.3598)
  point P139 (141.5285, -14.1576)
  point P140 (146.1365, -13.9383)
  point P141 (150.7679, -13.7022)
  point P142 (155.4191, -13.4499)
  point P143 (160.0853, -13.1829)
  point P144 (164.7617, -12.9024)
  point P145 (169.4444, -12.6099)
  point P146 (174.1283, -12.306)
  point P147 (178.8092, -11.9925)
  point P148 (183.4823, -11.67)
  point P149 (188.1434, -11.34)
  point P150 (192.7877, -11.0037)
  point P151 (197.4106, -10.6614)
  point P152 (202.0079, -10.3149)
  point P153 (206.5747, -9.9645)
  point P154 (211.1069, -9.6117)
  point P155 (215.5999, -9.2568)
  point P156 (220.0489, -8.9007)
  point P157 (228.7987, -8.1885)
  point P158 (233.0906, -7.8339)
  point P159 (237.3214, -7.4808)
  point P160 (241.4866, -7.1298)
  point P161 (245.5828, -6.7821)
  point P162 (249.6052, -6.4377)
  point P163 (253.5502, -6.0972)
  point P164 (257.4136, -5.7612)
  point P165 (261.1915, -5.4303)
  point P166 (264.88, -5.1051)
  point P167 (268.4758, -4.7856)
  point P168 (271.9747, -4.4724)
  point P169 (275.3734, -4.1661)
  point P170 (278.6686, -3.867)
  point P171 (281.8564, -3.5757)
  point P172 (284.9344, -3.2925)
  point P173 (287.8984, -3.018)
  point P174 (290.7463, -2.7525)
  point P175 (293.4745, -2.4963)
  point P176 (296.0806, -2.2503)
  point P177 (298.5616, -2.0142)
  point P178 (300.9151, -1.7892)
  point P179 (303.1387, -1.575)
  point P180 (305.23, -1.3728)
  point P181 (307.1866, -1.1823)
  point P182 (309.007, -1.0041)
  point P183 (310.6885, -0.8385)
  point P184 (312.2302, -0.6861)
  point P185 (313.6297, -0.5472)
  point P186 (314.8861, -0.4221)
  point P187 (315.9976, -0.3108)
  point P188 (316.9636, -0.2139)
  point P189 (317.7826, -0.1314)
  point P190 (318.4537, -0.0636)
  point P191 (318.9766, -0.0108)
  point P192 (319.3503, 0.027)
  point P193 (319.5743, 0.0498)
  point P194 (209.6498, 0.0573)
  point P195 (28.0055, 1.0054)
  point P196 (217.627, 4.6359)
  dimension "d2" = 300.0001
  dimension "d19" = 110
  dimension "d22" = 100
  dimension "d23" = 7
  dimension "d24" = 5
  dimension "d25" = 5
  dimension "d44" = 198
  dimension "d46" = 59.8865
extrude "Extrusion6" add sketch "Sketch2" along normal blind 15 contours A0 S0 L11 L7 L9 L4 L8 L6 L10
properties part number "2414 basic aerofoil" material "Polyurethane Foam"
